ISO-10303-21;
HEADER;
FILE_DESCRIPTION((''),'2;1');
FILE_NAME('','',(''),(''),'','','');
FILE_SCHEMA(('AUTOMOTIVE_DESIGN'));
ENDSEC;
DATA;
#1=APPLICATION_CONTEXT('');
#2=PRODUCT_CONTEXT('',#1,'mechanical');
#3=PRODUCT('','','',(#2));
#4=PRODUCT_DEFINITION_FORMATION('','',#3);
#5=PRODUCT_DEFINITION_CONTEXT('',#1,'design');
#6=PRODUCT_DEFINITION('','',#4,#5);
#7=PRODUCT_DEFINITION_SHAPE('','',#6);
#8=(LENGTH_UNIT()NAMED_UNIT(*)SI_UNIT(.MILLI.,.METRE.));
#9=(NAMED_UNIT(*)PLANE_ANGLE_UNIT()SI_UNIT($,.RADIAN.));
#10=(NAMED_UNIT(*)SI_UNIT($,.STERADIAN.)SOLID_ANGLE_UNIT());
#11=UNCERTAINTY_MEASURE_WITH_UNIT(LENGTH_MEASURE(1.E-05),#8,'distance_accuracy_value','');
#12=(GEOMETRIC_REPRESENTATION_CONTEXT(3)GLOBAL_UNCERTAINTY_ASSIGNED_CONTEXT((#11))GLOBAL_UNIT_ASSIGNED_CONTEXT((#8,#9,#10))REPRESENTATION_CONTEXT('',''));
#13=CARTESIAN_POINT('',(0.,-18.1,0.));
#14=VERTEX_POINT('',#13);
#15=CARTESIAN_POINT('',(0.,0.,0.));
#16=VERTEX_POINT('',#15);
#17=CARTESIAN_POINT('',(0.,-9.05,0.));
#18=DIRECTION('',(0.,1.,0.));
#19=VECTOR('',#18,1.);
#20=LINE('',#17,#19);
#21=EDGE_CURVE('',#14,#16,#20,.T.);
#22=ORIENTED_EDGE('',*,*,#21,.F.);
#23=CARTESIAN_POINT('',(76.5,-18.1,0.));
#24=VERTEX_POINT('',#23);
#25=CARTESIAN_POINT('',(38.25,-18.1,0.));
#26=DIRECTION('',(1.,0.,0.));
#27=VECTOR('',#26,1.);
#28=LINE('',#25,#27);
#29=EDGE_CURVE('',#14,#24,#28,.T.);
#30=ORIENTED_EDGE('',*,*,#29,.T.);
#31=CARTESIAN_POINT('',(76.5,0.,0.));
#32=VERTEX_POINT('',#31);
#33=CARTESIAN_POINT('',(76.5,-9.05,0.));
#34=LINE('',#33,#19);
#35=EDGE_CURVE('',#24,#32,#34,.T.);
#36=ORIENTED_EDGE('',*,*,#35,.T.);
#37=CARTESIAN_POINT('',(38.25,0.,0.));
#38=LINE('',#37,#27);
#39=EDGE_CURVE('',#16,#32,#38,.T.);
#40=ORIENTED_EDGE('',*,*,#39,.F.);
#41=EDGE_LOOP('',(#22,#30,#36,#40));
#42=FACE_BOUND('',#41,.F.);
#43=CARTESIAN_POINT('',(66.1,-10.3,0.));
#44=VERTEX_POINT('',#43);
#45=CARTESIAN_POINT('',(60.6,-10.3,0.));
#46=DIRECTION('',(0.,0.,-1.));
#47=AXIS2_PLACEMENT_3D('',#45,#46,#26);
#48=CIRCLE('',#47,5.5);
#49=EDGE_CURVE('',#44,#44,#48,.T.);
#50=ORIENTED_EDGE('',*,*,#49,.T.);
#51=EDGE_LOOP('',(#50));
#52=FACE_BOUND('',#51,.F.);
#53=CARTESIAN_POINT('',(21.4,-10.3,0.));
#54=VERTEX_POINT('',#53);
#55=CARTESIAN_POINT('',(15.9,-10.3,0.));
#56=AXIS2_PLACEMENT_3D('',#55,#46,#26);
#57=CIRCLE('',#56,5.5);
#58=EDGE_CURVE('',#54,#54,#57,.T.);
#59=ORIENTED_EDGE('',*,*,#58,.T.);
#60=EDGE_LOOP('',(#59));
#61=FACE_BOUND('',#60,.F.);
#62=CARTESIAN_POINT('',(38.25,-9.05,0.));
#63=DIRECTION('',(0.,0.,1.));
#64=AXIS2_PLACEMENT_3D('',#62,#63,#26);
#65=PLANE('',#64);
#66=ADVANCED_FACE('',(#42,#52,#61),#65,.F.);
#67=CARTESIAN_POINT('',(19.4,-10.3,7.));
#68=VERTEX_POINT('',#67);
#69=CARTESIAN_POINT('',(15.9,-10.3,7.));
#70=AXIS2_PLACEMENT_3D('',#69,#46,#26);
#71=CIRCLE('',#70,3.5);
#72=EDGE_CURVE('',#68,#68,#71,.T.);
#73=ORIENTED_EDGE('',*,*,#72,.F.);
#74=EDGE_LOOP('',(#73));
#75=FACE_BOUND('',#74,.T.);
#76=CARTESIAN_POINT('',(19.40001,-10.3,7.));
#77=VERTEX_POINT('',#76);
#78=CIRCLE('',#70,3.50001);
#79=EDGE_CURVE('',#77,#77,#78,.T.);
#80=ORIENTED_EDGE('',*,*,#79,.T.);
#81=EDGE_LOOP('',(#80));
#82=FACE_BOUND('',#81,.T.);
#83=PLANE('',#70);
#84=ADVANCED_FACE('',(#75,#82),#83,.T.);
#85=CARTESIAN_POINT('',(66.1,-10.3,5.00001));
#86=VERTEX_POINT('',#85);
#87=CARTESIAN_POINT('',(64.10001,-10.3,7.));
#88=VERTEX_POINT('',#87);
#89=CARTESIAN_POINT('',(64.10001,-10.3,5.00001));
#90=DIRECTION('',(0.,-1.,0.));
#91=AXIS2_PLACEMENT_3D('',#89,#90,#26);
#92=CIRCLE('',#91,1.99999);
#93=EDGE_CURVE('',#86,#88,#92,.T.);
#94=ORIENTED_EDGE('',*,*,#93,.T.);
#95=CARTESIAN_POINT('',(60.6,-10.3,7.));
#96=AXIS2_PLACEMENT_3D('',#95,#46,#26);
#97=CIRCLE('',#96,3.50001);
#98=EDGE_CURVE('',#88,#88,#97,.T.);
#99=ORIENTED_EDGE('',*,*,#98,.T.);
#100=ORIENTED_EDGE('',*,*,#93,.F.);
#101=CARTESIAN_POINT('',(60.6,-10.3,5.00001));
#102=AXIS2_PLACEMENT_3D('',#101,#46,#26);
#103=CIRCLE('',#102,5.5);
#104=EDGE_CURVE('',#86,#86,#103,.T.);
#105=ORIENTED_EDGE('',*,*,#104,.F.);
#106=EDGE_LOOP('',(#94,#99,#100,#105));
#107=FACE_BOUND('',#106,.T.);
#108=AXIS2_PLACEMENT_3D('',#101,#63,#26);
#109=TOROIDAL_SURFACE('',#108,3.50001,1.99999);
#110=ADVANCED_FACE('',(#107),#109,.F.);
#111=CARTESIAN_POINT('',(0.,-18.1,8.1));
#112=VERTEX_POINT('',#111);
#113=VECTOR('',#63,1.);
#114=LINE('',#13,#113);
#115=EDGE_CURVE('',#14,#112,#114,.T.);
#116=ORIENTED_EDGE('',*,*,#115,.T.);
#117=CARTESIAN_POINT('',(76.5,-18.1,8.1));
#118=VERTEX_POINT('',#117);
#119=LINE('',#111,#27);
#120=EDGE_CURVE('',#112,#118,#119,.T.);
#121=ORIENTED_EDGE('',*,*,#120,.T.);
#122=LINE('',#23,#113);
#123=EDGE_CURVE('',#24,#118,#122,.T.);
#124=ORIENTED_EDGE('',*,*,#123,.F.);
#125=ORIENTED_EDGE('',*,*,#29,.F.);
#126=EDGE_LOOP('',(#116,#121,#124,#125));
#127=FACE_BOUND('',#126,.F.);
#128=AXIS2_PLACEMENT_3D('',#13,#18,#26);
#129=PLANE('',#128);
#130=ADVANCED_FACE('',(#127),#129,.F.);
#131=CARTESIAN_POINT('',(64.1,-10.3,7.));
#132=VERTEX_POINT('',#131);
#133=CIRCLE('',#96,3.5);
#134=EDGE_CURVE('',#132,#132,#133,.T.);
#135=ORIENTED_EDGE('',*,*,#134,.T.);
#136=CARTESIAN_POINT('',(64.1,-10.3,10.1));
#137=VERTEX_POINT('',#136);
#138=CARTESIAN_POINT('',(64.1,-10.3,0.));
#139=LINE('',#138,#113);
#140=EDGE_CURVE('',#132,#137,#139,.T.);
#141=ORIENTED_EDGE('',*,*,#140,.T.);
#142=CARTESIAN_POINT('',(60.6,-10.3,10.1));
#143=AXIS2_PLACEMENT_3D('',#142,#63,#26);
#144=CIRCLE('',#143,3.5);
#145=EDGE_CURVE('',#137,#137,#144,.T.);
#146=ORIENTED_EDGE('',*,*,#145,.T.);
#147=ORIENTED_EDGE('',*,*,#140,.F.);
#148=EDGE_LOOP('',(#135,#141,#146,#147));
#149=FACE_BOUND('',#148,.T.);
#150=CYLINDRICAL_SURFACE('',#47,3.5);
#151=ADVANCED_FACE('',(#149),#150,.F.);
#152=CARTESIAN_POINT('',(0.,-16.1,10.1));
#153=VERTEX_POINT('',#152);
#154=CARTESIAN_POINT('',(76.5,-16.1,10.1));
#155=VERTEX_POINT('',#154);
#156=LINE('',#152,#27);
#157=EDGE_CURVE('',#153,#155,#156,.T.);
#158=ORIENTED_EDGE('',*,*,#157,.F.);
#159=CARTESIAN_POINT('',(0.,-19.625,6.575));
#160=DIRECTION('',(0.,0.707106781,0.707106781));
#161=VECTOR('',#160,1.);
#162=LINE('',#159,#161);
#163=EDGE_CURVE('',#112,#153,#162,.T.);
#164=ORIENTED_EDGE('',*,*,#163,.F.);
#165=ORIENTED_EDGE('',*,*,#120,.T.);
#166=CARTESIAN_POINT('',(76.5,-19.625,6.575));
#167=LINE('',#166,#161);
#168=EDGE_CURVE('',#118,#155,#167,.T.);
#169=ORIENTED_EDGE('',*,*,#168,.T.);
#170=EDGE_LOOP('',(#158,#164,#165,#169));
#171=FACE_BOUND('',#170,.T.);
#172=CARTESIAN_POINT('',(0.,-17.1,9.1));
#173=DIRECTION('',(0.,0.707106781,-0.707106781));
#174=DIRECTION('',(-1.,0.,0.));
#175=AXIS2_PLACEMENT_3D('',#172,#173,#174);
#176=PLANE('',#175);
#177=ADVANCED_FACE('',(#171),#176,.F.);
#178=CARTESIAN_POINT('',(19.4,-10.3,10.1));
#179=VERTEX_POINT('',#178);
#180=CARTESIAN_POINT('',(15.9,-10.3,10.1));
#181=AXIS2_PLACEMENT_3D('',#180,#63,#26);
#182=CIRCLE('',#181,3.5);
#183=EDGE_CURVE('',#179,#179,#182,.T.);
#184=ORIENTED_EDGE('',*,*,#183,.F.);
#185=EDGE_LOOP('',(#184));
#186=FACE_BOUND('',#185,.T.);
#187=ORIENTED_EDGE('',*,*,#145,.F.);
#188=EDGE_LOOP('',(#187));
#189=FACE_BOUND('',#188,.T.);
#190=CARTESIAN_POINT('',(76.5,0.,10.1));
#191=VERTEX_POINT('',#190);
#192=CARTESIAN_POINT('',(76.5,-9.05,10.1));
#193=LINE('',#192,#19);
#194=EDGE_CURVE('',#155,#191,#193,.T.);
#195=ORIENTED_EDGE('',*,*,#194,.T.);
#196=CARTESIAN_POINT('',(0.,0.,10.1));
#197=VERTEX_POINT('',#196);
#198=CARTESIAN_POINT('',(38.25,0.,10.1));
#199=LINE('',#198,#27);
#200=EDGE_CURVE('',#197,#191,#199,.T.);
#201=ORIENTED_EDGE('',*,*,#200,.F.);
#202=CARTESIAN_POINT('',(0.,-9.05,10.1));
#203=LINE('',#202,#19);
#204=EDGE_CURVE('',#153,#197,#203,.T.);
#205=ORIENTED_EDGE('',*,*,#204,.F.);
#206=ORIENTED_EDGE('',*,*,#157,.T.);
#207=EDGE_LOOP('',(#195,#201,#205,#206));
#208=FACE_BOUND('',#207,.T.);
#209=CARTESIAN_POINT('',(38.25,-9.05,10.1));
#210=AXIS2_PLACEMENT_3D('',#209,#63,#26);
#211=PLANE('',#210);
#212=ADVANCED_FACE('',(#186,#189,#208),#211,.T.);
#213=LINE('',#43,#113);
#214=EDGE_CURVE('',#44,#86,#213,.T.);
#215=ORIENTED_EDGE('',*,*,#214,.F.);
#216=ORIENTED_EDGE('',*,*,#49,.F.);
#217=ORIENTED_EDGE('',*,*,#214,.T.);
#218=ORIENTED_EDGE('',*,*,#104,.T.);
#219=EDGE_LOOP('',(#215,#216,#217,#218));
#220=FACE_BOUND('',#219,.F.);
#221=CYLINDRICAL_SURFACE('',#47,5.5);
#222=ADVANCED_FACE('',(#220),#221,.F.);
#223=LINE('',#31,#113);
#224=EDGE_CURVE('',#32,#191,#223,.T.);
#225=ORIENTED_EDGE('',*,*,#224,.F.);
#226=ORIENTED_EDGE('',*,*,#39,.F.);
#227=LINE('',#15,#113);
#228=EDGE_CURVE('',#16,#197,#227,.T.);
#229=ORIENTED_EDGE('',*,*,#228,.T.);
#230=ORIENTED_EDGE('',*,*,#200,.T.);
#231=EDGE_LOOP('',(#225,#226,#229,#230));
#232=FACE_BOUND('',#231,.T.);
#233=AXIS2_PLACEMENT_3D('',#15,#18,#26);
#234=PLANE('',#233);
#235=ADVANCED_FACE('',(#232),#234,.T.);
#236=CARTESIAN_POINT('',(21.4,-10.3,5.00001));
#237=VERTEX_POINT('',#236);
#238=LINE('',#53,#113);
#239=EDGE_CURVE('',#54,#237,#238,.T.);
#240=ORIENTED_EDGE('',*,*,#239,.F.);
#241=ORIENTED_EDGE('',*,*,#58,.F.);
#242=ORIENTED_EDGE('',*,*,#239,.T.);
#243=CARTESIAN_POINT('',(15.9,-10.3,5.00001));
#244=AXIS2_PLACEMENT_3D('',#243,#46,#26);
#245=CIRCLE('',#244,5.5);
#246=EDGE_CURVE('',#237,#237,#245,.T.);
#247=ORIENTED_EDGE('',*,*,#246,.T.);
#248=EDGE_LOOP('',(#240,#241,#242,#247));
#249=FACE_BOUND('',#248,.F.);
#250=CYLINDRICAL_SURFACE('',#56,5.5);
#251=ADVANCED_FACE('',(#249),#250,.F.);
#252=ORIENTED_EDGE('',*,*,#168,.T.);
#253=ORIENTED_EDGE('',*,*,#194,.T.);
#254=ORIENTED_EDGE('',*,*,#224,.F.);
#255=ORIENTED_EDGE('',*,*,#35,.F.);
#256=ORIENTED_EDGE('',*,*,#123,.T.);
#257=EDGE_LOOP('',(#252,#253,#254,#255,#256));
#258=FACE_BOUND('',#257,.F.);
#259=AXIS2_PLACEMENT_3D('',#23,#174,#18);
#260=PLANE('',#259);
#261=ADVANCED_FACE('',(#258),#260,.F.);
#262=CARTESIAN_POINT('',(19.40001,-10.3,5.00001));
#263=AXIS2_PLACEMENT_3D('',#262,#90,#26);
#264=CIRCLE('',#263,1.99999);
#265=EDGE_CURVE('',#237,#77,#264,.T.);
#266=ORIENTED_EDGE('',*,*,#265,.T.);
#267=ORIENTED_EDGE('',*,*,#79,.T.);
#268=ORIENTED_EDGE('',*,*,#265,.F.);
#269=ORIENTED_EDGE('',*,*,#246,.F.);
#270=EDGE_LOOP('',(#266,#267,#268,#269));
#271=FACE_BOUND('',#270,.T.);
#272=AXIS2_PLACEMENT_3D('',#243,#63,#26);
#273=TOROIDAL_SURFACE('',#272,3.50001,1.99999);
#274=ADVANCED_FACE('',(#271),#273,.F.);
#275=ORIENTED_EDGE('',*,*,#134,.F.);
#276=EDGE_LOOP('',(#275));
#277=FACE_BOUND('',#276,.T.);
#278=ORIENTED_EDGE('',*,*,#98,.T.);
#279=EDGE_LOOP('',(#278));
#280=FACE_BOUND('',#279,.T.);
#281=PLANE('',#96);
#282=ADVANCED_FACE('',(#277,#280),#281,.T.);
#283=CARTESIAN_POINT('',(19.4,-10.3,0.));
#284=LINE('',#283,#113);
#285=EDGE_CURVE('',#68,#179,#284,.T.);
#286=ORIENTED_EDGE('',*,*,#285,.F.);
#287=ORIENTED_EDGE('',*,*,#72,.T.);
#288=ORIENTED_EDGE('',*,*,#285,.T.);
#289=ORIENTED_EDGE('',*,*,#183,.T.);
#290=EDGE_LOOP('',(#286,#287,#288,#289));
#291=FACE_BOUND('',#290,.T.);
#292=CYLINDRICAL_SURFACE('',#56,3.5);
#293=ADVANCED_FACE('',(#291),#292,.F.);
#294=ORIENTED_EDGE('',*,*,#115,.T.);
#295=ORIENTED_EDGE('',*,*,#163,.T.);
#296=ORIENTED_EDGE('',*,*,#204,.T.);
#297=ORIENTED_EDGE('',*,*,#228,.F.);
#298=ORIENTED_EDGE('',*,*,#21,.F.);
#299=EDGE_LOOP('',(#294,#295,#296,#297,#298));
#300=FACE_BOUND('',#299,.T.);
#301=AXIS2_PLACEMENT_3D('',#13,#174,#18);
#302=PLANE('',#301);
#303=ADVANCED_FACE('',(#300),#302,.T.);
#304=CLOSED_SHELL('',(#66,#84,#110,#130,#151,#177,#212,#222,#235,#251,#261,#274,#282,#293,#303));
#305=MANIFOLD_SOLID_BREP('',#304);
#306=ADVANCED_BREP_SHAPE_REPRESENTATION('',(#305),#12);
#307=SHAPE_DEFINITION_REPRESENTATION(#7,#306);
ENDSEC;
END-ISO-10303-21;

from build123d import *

# Parameters (mm, degrees)
F0_W     = 76.5
F0_H     = 18.1
F0_R     = 3.5
F1_DEPTH = 10.1
F2_R     = 5.5
F3_DEPTH = 7
F4_R     = 1.99999
F5_SIZE  = 2


# Not quite as in the source:
# - a fillet or chamfer is up to 0.001 mm smaller than in the source, because OpenCascade refuses the exact size
# - a feature names something its author has since deleted; it is built from what else it names


with BuildPart() as f1:
    # F0 (on Top) → F1 (new body)
    with BuildSketch(Plane.XY):
        with Locations((38.25, -9.05)):
            Rectangle(F0_W, F0_H)
        with Locations((15.9, -10.3)):
            Circle(F0_R, mode=Mode.SUBTRACT)
        with Locations((60.6, -10.3)):
            Circle(F0_R, mode=Mode.SUBTRACT)
    extrude(amount=F1_DEPTH)

    # F2 (on face) → F3 (cut)
    with BuildSketch(Plane(origin=(0, 0, 0), x_dir=(1, 0, 0), z_dir=(0, 0, -1))):
        with Locations((60.6, 10.3)):
            Circle(F2_R)
        with Locations((15.9, 10.3)):
            Circle(F2_R)
    extrude(amount=-F3_DEPTH, mode=Mode.SUBTRACT)

    # F4 (radius 2 in the source; OpenCascade refuses exactly that, so slightly less here)
    f4_edges = [f1.edges().sort_by_distance(p)[0] for p in [
        (55.1, -10.3, 7),
        (10.4, -10.3, 7),
    ]]
    fillet(f4_edges, radius=F4_R)

    # F5
    f5_edges = [f1.edges().sort_by_distance(p)[0] for p in [
        (38.25, -18.1, 10.1),
    ]]
    chamfer(f5_edges, length=F5_SIZE)


solid = f1.part
